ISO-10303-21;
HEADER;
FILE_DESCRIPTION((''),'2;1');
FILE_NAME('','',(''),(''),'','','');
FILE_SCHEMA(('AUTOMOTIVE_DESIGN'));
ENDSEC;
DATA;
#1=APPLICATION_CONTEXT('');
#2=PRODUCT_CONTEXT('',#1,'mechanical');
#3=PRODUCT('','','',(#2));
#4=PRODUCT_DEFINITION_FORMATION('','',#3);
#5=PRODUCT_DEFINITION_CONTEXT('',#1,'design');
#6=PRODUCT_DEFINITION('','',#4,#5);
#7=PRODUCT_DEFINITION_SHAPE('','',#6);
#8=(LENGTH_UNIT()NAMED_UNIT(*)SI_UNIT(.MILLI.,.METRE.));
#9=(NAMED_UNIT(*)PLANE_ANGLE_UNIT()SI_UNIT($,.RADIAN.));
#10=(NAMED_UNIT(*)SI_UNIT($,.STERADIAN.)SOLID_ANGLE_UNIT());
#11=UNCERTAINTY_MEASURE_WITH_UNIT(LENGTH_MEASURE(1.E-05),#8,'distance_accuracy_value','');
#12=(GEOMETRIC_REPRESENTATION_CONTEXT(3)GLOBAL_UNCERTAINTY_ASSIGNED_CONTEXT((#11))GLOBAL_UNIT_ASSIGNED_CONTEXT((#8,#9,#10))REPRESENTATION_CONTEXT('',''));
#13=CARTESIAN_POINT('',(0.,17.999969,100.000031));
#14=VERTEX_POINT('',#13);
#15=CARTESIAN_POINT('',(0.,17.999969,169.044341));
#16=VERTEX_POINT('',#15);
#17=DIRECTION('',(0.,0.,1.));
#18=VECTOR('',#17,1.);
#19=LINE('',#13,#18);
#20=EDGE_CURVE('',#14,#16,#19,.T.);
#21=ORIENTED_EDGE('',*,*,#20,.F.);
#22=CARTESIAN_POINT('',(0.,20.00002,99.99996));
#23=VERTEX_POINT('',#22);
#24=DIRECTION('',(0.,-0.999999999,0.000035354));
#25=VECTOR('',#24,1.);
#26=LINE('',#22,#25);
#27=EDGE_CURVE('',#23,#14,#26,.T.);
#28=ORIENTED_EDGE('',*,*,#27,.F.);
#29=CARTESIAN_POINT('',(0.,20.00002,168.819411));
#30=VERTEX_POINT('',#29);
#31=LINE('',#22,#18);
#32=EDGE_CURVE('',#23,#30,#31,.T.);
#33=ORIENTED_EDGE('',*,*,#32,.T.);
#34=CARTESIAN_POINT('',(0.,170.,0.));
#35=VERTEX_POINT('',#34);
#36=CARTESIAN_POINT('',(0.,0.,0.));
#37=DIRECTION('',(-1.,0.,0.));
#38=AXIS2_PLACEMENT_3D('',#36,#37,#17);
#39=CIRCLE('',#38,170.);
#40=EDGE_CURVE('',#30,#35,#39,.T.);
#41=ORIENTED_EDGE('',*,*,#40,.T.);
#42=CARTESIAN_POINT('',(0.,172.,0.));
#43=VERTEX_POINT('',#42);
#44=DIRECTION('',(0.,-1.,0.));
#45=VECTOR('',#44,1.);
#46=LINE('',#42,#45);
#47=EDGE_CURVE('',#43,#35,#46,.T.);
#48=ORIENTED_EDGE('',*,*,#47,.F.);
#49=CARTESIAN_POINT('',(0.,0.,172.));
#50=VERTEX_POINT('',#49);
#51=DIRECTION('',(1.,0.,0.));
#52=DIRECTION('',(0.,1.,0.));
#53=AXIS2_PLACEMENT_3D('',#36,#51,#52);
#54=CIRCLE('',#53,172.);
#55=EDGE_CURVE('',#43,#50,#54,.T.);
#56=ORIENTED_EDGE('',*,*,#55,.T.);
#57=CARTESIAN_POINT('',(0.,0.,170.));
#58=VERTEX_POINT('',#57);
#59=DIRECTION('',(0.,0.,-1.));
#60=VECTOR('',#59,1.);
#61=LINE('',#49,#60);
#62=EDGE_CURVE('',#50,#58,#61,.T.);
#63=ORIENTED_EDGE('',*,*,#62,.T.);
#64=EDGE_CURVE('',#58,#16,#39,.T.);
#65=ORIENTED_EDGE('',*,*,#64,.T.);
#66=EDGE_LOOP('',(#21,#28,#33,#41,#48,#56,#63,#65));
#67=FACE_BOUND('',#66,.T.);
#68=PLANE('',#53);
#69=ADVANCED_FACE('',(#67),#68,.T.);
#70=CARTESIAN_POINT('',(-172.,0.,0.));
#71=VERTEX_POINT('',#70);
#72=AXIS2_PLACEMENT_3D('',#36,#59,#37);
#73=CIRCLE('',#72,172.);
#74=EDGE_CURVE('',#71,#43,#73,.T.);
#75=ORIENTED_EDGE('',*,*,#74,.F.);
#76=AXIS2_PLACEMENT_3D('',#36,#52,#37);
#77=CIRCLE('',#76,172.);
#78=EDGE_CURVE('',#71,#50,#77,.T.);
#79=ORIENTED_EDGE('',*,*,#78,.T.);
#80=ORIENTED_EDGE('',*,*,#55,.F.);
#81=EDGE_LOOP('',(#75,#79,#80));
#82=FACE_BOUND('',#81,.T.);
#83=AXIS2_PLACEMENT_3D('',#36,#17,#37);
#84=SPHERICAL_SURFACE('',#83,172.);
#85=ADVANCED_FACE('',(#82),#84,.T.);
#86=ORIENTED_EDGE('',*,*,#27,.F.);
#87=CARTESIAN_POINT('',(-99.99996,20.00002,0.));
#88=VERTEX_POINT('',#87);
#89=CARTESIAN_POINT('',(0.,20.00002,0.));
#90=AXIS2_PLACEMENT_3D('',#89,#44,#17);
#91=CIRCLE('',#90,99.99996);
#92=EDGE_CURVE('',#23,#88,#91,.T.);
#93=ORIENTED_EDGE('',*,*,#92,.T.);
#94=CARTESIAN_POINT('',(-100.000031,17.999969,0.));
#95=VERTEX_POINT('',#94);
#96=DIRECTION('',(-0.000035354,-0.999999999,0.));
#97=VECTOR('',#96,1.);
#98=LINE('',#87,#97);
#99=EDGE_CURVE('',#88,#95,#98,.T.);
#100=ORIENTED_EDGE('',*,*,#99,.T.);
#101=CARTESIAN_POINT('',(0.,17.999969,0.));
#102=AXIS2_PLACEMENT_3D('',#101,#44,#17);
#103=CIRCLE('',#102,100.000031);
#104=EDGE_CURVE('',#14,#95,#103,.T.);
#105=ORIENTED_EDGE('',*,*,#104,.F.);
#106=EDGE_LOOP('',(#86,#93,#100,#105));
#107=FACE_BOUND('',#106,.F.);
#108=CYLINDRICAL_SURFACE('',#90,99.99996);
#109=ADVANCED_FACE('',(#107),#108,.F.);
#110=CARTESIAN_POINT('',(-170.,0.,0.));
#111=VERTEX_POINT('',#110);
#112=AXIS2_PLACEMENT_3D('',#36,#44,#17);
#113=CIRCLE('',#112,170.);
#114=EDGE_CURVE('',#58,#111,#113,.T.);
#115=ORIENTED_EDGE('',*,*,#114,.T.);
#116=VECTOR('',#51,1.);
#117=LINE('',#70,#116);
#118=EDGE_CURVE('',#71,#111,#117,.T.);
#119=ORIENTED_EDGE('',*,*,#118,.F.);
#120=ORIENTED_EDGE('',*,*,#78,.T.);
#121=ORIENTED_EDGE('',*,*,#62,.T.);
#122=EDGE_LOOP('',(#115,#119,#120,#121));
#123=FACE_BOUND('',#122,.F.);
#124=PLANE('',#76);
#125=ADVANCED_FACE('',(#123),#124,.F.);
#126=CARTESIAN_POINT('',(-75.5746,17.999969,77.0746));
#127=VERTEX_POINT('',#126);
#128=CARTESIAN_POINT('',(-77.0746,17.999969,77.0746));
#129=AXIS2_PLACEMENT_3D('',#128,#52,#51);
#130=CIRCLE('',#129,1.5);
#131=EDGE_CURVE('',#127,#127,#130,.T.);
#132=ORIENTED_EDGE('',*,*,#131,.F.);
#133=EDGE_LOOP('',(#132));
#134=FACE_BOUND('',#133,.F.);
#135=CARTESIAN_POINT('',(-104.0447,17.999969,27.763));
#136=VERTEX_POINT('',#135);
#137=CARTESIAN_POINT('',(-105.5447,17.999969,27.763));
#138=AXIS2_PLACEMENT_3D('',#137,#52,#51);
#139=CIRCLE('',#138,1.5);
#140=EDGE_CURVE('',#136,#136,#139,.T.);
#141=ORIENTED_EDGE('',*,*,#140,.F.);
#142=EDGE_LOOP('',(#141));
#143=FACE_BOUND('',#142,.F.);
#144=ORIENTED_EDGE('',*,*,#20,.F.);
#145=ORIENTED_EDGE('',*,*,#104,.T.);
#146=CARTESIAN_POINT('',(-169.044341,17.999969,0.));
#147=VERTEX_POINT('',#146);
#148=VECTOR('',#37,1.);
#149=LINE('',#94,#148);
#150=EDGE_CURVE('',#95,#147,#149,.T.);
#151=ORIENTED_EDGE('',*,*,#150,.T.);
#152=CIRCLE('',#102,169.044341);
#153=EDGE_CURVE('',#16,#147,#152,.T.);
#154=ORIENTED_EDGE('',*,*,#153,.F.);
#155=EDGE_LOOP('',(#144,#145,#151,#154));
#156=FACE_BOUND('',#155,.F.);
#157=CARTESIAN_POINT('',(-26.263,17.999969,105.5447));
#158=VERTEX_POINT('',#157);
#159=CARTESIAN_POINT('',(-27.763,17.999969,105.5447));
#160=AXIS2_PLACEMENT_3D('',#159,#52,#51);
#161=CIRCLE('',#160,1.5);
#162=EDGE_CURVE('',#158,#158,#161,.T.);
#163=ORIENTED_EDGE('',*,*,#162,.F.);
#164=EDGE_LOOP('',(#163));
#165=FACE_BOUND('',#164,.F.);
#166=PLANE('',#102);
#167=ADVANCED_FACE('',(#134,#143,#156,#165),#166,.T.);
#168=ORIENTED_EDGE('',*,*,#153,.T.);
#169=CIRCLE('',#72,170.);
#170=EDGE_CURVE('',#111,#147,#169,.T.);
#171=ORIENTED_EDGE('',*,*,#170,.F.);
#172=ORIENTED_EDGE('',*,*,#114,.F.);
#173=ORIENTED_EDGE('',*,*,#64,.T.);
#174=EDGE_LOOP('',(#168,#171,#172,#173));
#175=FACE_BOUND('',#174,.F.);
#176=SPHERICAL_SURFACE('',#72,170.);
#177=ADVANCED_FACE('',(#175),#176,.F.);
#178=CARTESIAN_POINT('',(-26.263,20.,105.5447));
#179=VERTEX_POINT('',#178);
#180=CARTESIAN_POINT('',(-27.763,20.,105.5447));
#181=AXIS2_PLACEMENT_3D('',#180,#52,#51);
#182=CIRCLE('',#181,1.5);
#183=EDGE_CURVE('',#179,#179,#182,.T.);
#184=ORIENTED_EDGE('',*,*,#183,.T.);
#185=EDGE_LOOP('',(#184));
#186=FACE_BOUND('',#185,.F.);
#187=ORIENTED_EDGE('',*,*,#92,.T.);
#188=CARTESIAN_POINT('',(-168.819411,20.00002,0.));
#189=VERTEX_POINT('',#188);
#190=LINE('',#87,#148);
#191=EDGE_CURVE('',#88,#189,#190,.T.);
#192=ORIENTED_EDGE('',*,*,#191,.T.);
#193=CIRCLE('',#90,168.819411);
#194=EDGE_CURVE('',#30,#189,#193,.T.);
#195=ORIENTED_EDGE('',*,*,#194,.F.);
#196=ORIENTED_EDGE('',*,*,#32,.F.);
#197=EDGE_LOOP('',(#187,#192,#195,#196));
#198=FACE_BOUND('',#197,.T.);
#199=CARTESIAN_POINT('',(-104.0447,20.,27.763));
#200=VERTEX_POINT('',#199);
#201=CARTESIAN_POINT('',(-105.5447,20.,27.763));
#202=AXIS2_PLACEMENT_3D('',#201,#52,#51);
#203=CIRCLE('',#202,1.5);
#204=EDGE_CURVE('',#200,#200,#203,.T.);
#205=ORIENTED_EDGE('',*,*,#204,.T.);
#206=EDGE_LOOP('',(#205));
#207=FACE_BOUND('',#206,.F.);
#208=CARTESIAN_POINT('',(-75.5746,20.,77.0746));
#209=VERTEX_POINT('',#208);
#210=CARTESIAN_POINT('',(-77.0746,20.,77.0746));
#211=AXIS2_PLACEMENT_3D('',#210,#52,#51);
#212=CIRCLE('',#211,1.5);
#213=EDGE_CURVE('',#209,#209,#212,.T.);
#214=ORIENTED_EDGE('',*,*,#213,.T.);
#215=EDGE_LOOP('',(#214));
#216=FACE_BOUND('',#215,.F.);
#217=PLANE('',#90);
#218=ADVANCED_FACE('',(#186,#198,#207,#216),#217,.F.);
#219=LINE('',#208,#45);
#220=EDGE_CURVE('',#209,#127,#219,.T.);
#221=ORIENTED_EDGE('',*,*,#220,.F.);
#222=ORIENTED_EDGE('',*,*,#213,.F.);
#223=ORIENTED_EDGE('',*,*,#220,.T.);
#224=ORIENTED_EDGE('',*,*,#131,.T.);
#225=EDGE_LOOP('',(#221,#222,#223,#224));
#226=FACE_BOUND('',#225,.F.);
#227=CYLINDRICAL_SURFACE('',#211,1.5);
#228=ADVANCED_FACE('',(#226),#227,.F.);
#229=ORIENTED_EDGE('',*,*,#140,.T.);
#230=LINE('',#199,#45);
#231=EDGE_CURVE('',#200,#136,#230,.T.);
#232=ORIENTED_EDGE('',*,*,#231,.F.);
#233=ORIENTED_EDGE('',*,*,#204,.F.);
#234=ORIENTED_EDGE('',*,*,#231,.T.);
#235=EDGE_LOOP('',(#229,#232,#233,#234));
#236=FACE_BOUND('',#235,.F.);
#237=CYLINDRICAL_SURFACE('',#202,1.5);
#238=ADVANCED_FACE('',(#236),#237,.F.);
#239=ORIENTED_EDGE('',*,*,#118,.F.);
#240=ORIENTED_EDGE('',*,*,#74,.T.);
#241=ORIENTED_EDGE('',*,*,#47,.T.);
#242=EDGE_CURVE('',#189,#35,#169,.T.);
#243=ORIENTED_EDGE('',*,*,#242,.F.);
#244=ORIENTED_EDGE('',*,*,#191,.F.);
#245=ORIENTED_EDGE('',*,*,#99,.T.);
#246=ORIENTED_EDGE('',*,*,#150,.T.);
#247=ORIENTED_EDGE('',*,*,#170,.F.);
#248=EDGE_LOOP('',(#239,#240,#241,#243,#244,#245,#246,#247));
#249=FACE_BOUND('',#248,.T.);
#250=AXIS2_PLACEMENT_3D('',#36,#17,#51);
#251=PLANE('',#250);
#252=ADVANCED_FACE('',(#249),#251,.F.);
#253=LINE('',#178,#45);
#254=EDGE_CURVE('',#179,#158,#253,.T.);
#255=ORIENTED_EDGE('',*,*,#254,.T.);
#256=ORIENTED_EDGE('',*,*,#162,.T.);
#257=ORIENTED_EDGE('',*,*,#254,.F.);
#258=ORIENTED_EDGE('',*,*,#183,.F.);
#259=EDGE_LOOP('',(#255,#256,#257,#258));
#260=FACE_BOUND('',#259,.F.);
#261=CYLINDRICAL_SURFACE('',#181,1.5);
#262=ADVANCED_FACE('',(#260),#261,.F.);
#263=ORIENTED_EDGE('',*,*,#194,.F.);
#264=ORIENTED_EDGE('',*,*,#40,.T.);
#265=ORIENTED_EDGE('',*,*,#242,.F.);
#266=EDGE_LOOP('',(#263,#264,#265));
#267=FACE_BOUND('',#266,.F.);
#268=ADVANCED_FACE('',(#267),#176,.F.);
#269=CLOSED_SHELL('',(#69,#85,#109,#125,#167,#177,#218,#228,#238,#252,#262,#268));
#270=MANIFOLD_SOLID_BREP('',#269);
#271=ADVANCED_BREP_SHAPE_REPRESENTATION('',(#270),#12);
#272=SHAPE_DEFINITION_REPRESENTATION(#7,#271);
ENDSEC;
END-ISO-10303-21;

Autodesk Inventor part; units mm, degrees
ref_plane "YZ Plane" through (0, 0, 0) normal (1, 0, 0) x (0, 1, 0)
ref_plane "XZ Plane" through (0, 0, 0) normal (0, 1, 0) x (-1, 0, 0)
ref_plane "XY Plane" through (0, 0, 0) normal (0, 0, 1) x (1, 0, 0)
sketch "Sketch1" plane through (0, 0, 0) normal (0, 1, 0) x (-1, 0, 0)
  arc A0 (172, 0) -> (0, 172) centre (0, 0) ccw
  line L0 (0, 172) -> (0, 0)
  line L1 (172, 0) -> (0, 0)
revolve "Revolution1" add sketch "Sketch1" angle 90 about axis through (0, 0, 172) along (0, 0, -1)
sketch "Sketch2" plane through (-172, 0, 0) normal (0, -1, 0) x (1, 0, 0)
  arc A0 (172, 170) -> (2, 0) centre (172, 0) ccw
  line L0 (172, 0) -> (172, 172) projected
  line L1 (172, 0) -> (2, 0)
  line L2 (172, 0) -> (172, 170)
revolve "Revolution2" cut sketch "Sketch2" angle 90 about axis through (0, 0, 0) along (0, 0, -1)
sketch "Sketch3" plane through (0, 0, 0) normal (1, 0, 0) x (0, -0.7071068, -0.7071068)
  arc A0 (-121.6224, 121.6224) -> (-121.6224, -121.6224) centre (0, 0) ccw projected
  arc A1 (-120.2082, 120.2082) -> (-120.2082, -120.2082) centre (0, 0) ccw projected
  line L0 (-121.6224, -121.6224) -> (-101.6224, -121.6224) construction
  line L1 (0, 0) -> (-121.6224, 121.6224) projected
  line L2 (0, 0) -> (-14.1421, 14.1421)
  line L3 (-84.8528, -56.5685) -> (-133.5155, -105.2312)
  line L4 (-84.8528, -56.5685) -> (-83.4386, -57.9828)
  line L5 (-83.4386, -57.9828) -> (-132.2603, -106.8045)
  point P0 (-134.7537, -103.641)
  dimension "d49" = 2
revolve "Revolution3" add sketch "Sketch3" angle 90 about axis through (0, 0, 0) along (0, -1, 0)
sketch "Sketch7" plane through (0, 20, 168.8194) normal (0, 1, 0) x (1, 0, 0)
  circle A0 centre (-27.763, 63.2747) radius 1.5
  circle A1 centre (-77.0746, 91.7448) radius 1.5
  circle A2 centre (-105.5447, 141.0564) radius 1.5
  line L0 (-77.7817, 91.0377) -> (-77.0746, 91.7448)
  line L1 (-77.7817, 91.0377) -> (-76.7817, 91.0377) construction
  dimension "d57" = 3
  dimension "d58" = 3
  dimension "d59" = 3
  dimension "d62" = 1
  dimension "d63" = 45
extrude "Extrusion4" cut sketch "Sketch7" against normal blind 10
properties part number "shell" material "Glass"
